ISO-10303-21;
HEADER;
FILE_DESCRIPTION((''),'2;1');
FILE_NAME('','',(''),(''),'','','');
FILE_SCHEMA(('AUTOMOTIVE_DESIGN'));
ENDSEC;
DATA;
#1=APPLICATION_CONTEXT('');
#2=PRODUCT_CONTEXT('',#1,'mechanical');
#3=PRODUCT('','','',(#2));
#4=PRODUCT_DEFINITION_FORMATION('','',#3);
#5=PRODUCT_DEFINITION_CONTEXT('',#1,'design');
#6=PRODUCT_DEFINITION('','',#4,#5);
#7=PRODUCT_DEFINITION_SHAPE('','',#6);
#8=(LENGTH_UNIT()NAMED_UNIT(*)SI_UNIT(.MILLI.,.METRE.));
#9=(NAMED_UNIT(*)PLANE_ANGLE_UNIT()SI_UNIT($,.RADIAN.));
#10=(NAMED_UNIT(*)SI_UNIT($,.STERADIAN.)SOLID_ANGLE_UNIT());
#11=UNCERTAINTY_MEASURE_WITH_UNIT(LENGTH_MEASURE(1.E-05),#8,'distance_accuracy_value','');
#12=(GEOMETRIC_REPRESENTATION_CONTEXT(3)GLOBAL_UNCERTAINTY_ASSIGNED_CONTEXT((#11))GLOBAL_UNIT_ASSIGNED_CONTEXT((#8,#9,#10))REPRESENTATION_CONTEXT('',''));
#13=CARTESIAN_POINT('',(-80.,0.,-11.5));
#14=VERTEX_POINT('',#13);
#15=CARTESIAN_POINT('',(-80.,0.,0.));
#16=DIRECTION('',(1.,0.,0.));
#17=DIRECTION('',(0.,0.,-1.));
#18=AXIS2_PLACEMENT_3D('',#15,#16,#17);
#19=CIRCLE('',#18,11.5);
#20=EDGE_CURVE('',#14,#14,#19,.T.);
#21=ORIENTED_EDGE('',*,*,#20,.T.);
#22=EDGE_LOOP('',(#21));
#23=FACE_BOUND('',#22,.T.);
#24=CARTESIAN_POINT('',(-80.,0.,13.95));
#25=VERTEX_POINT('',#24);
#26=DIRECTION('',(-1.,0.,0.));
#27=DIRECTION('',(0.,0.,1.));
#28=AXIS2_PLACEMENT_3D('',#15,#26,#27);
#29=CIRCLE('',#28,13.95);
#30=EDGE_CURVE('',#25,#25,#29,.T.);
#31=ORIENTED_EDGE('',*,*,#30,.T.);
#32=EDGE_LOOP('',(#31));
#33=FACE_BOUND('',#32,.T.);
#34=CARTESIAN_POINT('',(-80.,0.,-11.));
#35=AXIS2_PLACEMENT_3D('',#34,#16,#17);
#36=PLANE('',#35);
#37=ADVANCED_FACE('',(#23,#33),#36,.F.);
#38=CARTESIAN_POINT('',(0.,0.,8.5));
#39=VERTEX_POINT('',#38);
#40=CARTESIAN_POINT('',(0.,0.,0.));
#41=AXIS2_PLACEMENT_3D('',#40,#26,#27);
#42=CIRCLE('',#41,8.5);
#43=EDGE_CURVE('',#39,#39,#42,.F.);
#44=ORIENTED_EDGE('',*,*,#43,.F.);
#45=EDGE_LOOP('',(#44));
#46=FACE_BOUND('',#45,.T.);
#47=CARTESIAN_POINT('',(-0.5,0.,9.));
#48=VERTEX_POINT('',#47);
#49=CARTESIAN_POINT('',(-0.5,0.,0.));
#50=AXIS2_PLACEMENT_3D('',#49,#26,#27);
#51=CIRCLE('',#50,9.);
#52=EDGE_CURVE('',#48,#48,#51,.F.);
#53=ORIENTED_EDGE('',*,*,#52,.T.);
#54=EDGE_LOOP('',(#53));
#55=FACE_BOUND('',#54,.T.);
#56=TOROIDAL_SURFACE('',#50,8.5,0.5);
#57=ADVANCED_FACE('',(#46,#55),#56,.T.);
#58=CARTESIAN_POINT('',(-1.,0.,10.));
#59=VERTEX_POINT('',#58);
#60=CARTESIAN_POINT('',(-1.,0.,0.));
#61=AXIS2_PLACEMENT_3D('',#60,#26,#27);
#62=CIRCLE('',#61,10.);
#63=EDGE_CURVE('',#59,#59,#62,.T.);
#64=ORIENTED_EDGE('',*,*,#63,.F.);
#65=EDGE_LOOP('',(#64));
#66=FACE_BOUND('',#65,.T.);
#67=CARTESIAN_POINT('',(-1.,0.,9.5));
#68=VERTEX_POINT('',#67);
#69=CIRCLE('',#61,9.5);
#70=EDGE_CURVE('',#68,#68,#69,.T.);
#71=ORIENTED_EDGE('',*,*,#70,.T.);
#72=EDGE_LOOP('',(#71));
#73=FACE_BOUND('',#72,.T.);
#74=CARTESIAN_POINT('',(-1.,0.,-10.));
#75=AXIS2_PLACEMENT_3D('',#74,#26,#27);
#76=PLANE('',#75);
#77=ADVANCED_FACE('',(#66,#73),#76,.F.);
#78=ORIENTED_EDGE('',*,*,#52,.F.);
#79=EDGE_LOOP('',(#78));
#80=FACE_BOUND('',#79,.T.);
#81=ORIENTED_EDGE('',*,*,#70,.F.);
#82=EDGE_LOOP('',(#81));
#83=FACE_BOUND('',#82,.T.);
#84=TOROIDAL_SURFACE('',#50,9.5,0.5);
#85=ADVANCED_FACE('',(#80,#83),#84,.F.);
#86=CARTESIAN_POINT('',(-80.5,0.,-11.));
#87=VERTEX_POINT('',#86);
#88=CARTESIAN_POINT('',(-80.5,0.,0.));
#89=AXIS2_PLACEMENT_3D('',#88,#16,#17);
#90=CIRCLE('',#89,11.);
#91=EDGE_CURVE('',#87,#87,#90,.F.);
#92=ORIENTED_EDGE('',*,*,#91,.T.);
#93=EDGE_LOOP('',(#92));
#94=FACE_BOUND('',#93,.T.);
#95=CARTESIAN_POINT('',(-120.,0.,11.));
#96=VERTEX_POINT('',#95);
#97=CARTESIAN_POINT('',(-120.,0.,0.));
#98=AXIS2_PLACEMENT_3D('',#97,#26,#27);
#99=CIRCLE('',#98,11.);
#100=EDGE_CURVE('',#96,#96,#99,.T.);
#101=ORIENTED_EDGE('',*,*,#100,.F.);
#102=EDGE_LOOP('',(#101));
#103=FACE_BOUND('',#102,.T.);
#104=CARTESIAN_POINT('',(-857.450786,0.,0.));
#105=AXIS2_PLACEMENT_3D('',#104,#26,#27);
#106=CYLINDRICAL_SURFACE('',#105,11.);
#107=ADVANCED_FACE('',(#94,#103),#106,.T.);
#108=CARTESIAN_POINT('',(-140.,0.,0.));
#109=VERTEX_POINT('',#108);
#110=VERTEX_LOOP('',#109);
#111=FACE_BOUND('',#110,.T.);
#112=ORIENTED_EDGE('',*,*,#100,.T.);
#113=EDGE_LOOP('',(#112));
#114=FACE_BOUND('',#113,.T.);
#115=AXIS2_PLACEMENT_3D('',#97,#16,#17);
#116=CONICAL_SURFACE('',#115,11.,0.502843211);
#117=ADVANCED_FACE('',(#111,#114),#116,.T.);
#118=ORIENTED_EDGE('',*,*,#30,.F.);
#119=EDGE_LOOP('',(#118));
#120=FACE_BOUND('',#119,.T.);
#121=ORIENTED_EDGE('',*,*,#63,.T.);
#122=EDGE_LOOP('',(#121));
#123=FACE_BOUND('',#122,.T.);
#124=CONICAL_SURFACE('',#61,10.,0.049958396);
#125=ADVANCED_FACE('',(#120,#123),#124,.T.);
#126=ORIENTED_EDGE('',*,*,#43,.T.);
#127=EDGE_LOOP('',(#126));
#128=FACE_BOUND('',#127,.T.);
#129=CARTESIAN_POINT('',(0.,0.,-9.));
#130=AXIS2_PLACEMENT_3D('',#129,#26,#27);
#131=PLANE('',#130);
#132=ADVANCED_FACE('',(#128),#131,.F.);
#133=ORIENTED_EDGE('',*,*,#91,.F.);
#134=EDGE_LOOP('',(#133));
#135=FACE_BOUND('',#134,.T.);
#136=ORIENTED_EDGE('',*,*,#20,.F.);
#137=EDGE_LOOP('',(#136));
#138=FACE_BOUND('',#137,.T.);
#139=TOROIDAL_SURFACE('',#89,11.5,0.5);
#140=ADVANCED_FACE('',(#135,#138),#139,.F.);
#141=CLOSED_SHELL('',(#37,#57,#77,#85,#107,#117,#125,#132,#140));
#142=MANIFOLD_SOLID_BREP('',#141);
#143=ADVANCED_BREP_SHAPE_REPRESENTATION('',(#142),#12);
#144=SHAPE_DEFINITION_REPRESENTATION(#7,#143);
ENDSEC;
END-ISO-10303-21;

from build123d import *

# Parameters (mm, degrees)
FILLET_1_R = 0.5


with BuildPart() as part:
    # 草图1 → 旋转1 (revolve)
    with BuildSketch(Plane(origin=(0, 0, 0), x_dir=(1, 0, 0), z_dir=(0, 1, 0)), mode=Mode.PRIVATE) as revolve_1_sk:
        Polygon((-140, 0), (-120, 11), (-80, 11), (-80, 13.95), (-1, 10), (-1, 9), (0, 9), (0, 0), align=None)
    revolve(revolve_1_sk.sketch.rotate(Axis((-857.450785528, 0, 0), (1, 0, 0)), 180), axis=Axis((-857.450785528, 0, 0), (1, 0, 0)))

    # 圆角1
    fillet_1_edges = [part.edges().sort_by_distance(p)[0] for p in [
        (0, 0, -9),
        (-1, 0, -9),
        (-80, 0, -11),
    ]]
    fillet(fillet_1_edges, radius=FILLET_1_R - 0.0001)  # a hair under: the kernel refuses the full size


solid = part.part
